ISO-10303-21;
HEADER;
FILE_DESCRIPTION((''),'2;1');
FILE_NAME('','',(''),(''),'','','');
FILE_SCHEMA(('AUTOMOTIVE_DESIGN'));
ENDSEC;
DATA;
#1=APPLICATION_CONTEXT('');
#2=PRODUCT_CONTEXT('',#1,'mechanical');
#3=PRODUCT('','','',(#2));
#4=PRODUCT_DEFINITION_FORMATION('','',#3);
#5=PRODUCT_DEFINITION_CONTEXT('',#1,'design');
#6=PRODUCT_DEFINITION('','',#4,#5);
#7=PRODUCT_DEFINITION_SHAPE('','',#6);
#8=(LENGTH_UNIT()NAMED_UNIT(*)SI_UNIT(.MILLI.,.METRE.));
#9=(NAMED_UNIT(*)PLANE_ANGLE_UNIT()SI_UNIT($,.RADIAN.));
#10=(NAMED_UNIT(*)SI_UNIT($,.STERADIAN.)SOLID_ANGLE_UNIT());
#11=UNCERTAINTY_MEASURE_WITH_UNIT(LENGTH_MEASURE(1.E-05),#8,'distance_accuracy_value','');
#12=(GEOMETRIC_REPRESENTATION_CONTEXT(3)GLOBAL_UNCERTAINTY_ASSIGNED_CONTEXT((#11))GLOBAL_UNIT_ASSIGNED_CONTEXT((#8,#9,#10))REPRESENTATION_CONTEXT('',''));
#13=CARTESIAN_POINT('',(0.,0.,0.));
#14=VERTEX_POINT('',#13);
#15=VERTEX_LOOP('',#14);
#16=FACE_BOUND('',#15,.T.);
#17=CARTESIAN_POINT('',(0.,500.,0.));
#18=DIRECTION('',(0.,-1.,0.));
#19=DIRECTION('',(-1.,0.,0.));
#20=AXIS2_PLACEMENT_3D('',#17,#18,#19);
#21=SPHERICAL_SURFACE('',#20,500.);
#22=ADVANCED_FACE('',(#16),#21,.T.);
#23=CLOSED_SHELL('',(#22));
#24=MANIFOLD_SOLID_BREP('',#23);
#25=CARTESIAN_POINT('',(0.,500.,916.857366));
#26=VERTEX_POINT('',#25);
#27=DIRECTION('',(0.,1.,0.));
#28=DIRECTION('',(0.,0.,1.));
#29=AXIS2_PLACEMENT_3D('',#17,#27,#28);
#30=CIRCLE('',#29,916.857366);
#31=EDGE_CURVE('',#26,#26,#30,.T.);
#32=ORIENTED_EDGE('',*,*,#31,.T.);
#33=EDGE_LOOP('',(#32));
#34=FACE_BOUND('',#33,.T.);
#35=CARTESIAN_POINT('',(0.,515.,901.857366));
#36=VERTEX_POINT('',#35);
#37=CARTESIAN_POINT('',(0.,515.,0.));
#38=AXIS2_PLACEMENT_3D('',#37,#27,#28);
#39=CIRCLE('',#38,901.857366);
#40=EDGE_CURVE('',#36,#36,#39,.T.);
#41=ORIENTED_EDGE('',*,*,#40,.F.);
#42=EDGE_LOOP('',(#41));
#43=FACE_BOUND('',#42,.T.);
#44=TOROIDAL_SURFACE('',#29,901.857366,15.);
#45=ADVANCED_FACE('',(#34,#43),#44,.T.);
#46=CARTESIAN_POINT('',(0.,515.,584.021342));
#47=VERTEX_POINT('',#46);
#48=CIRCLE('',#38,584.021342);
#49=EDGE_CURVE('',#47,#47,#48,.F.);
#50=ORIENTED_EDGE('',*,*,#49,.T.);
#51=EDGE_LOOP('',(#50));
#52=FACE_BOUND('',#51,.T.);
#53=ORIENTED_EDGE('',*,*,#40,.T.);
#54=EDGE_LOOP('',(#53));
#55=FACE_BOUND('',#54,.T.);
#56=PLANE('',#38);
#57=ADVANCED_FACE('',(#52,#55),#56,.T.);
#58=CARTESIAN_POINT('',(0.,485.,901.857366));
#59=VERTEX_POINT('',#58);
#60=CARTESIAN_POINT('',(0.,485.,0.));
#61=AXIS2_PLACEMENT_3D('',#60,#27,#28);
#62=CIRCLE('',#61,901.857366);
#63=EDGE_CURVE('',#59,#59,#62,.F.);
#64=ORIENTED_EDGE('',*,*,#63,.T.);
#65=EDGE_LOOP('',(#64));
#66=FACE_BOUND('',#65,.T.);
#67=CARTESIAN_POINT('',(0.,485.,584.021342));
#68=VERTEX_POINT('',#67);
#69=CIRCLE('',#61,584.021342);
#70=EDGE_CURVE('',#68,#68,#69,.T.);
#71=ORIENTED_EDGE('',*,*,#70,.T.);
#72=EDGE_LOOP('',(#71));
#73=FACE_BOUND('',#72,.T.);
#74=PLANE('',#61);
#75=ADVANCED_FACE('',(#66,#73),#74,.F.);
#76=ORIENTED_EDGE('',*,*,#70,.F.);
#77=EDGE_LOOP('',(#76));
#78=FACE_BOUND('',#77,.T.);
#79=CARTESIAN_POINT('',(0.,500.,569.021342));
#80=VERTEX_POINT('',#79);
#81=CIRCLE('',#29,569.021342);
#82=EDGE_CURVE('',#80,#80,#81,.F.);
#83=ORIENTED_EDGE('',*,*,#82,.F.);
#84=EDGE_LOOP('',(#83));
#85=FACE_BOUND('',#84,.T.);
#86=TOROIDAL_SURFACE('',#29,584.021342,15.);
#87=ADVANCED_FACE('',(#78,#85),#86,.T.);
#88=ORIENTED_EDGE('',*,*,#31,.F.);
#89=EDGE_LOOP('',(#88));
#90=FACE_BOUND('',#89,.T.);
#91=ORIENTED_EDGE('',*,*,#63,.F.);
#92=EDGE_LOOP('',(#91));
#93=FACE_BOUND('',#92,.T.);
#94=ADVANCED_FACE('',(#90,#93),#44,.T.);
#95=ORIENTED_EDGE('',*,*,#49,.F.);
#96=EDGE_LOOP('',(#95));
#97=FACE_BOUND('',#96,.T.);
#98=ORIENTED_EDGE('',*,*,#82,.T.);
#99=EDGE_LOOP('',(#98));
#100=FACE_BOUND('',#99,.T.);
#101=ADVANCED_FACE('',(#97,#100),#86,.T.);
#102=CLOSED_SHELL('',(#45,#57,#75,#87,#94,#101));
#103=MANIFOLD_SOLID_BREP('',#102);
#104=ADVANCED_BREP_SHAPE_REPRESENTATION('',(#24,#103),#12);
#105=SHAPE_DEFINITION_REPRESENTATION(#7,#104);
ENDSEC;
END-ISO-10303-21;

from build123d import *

# Parameters (mm, degrees)
BOSS_EXTRU_1_DEPTH      = 15
BOSS_EXTRU_1_DEPTH_BACK = 15
ESQUISSE2_R             = 916.857366042
ESQUISSE2_R_2           = 569.021341934
CONG_1_R                = 15


with BuildPart() as part:
    # Esquisse1 → Révolution1 (revolve)
    with BuildSketch(Plane.XY):
        with BuildLine():
            Line((0, 0), (0, 1000))
            ThreePointArc((0, 1000), (500, 500), (0, 0))
        make_face()
    revolve(axis=Axis((0, 0, 0), (0, 1, 0)))


with BuildPart() as body_2:
    # Esquisse2 → Boss.-Extru.1 (new, two sides: drawn at the far end of the back side and taken through both)
    with BuildSketch(Plane(origin=(0, 500, 0), x_dir=(1, 0, 0), z_dir=(0, 1, 0)).offset(-BOSS_EXTRU_1_DEPTH_BACK)):
        with Locations(Location((0, 0, 0), (0, 0, 270))):
            Circle(ESQUISSE2_R)
        with Locations(Location((0, 0, 0), (0, 0, 270))):
            Circle(ESQUISSE2_R_2, mode=Mode.SUBTRACT)
    extrude(amount=BOSS_EXTRU_1_DEPTH + BOSS_EXTRU_1_DEPTH_BACK)

    # Congé1
    cong_1_edges = [body_2.edges().sort_by_distance(p)[0] for p in [
        (0, 485, -916.857366042),
        (0, 485, -569.021341934),
        (0, 515, -916.857366042),
        (0, 515, -569.021341934),
    ]]
    fillet(cong_1_edges, radius=CONG_1_R - 0.0001)  # a hair under: the kernel refuses the full size


solid = Compound([part.part, body_2.part])
